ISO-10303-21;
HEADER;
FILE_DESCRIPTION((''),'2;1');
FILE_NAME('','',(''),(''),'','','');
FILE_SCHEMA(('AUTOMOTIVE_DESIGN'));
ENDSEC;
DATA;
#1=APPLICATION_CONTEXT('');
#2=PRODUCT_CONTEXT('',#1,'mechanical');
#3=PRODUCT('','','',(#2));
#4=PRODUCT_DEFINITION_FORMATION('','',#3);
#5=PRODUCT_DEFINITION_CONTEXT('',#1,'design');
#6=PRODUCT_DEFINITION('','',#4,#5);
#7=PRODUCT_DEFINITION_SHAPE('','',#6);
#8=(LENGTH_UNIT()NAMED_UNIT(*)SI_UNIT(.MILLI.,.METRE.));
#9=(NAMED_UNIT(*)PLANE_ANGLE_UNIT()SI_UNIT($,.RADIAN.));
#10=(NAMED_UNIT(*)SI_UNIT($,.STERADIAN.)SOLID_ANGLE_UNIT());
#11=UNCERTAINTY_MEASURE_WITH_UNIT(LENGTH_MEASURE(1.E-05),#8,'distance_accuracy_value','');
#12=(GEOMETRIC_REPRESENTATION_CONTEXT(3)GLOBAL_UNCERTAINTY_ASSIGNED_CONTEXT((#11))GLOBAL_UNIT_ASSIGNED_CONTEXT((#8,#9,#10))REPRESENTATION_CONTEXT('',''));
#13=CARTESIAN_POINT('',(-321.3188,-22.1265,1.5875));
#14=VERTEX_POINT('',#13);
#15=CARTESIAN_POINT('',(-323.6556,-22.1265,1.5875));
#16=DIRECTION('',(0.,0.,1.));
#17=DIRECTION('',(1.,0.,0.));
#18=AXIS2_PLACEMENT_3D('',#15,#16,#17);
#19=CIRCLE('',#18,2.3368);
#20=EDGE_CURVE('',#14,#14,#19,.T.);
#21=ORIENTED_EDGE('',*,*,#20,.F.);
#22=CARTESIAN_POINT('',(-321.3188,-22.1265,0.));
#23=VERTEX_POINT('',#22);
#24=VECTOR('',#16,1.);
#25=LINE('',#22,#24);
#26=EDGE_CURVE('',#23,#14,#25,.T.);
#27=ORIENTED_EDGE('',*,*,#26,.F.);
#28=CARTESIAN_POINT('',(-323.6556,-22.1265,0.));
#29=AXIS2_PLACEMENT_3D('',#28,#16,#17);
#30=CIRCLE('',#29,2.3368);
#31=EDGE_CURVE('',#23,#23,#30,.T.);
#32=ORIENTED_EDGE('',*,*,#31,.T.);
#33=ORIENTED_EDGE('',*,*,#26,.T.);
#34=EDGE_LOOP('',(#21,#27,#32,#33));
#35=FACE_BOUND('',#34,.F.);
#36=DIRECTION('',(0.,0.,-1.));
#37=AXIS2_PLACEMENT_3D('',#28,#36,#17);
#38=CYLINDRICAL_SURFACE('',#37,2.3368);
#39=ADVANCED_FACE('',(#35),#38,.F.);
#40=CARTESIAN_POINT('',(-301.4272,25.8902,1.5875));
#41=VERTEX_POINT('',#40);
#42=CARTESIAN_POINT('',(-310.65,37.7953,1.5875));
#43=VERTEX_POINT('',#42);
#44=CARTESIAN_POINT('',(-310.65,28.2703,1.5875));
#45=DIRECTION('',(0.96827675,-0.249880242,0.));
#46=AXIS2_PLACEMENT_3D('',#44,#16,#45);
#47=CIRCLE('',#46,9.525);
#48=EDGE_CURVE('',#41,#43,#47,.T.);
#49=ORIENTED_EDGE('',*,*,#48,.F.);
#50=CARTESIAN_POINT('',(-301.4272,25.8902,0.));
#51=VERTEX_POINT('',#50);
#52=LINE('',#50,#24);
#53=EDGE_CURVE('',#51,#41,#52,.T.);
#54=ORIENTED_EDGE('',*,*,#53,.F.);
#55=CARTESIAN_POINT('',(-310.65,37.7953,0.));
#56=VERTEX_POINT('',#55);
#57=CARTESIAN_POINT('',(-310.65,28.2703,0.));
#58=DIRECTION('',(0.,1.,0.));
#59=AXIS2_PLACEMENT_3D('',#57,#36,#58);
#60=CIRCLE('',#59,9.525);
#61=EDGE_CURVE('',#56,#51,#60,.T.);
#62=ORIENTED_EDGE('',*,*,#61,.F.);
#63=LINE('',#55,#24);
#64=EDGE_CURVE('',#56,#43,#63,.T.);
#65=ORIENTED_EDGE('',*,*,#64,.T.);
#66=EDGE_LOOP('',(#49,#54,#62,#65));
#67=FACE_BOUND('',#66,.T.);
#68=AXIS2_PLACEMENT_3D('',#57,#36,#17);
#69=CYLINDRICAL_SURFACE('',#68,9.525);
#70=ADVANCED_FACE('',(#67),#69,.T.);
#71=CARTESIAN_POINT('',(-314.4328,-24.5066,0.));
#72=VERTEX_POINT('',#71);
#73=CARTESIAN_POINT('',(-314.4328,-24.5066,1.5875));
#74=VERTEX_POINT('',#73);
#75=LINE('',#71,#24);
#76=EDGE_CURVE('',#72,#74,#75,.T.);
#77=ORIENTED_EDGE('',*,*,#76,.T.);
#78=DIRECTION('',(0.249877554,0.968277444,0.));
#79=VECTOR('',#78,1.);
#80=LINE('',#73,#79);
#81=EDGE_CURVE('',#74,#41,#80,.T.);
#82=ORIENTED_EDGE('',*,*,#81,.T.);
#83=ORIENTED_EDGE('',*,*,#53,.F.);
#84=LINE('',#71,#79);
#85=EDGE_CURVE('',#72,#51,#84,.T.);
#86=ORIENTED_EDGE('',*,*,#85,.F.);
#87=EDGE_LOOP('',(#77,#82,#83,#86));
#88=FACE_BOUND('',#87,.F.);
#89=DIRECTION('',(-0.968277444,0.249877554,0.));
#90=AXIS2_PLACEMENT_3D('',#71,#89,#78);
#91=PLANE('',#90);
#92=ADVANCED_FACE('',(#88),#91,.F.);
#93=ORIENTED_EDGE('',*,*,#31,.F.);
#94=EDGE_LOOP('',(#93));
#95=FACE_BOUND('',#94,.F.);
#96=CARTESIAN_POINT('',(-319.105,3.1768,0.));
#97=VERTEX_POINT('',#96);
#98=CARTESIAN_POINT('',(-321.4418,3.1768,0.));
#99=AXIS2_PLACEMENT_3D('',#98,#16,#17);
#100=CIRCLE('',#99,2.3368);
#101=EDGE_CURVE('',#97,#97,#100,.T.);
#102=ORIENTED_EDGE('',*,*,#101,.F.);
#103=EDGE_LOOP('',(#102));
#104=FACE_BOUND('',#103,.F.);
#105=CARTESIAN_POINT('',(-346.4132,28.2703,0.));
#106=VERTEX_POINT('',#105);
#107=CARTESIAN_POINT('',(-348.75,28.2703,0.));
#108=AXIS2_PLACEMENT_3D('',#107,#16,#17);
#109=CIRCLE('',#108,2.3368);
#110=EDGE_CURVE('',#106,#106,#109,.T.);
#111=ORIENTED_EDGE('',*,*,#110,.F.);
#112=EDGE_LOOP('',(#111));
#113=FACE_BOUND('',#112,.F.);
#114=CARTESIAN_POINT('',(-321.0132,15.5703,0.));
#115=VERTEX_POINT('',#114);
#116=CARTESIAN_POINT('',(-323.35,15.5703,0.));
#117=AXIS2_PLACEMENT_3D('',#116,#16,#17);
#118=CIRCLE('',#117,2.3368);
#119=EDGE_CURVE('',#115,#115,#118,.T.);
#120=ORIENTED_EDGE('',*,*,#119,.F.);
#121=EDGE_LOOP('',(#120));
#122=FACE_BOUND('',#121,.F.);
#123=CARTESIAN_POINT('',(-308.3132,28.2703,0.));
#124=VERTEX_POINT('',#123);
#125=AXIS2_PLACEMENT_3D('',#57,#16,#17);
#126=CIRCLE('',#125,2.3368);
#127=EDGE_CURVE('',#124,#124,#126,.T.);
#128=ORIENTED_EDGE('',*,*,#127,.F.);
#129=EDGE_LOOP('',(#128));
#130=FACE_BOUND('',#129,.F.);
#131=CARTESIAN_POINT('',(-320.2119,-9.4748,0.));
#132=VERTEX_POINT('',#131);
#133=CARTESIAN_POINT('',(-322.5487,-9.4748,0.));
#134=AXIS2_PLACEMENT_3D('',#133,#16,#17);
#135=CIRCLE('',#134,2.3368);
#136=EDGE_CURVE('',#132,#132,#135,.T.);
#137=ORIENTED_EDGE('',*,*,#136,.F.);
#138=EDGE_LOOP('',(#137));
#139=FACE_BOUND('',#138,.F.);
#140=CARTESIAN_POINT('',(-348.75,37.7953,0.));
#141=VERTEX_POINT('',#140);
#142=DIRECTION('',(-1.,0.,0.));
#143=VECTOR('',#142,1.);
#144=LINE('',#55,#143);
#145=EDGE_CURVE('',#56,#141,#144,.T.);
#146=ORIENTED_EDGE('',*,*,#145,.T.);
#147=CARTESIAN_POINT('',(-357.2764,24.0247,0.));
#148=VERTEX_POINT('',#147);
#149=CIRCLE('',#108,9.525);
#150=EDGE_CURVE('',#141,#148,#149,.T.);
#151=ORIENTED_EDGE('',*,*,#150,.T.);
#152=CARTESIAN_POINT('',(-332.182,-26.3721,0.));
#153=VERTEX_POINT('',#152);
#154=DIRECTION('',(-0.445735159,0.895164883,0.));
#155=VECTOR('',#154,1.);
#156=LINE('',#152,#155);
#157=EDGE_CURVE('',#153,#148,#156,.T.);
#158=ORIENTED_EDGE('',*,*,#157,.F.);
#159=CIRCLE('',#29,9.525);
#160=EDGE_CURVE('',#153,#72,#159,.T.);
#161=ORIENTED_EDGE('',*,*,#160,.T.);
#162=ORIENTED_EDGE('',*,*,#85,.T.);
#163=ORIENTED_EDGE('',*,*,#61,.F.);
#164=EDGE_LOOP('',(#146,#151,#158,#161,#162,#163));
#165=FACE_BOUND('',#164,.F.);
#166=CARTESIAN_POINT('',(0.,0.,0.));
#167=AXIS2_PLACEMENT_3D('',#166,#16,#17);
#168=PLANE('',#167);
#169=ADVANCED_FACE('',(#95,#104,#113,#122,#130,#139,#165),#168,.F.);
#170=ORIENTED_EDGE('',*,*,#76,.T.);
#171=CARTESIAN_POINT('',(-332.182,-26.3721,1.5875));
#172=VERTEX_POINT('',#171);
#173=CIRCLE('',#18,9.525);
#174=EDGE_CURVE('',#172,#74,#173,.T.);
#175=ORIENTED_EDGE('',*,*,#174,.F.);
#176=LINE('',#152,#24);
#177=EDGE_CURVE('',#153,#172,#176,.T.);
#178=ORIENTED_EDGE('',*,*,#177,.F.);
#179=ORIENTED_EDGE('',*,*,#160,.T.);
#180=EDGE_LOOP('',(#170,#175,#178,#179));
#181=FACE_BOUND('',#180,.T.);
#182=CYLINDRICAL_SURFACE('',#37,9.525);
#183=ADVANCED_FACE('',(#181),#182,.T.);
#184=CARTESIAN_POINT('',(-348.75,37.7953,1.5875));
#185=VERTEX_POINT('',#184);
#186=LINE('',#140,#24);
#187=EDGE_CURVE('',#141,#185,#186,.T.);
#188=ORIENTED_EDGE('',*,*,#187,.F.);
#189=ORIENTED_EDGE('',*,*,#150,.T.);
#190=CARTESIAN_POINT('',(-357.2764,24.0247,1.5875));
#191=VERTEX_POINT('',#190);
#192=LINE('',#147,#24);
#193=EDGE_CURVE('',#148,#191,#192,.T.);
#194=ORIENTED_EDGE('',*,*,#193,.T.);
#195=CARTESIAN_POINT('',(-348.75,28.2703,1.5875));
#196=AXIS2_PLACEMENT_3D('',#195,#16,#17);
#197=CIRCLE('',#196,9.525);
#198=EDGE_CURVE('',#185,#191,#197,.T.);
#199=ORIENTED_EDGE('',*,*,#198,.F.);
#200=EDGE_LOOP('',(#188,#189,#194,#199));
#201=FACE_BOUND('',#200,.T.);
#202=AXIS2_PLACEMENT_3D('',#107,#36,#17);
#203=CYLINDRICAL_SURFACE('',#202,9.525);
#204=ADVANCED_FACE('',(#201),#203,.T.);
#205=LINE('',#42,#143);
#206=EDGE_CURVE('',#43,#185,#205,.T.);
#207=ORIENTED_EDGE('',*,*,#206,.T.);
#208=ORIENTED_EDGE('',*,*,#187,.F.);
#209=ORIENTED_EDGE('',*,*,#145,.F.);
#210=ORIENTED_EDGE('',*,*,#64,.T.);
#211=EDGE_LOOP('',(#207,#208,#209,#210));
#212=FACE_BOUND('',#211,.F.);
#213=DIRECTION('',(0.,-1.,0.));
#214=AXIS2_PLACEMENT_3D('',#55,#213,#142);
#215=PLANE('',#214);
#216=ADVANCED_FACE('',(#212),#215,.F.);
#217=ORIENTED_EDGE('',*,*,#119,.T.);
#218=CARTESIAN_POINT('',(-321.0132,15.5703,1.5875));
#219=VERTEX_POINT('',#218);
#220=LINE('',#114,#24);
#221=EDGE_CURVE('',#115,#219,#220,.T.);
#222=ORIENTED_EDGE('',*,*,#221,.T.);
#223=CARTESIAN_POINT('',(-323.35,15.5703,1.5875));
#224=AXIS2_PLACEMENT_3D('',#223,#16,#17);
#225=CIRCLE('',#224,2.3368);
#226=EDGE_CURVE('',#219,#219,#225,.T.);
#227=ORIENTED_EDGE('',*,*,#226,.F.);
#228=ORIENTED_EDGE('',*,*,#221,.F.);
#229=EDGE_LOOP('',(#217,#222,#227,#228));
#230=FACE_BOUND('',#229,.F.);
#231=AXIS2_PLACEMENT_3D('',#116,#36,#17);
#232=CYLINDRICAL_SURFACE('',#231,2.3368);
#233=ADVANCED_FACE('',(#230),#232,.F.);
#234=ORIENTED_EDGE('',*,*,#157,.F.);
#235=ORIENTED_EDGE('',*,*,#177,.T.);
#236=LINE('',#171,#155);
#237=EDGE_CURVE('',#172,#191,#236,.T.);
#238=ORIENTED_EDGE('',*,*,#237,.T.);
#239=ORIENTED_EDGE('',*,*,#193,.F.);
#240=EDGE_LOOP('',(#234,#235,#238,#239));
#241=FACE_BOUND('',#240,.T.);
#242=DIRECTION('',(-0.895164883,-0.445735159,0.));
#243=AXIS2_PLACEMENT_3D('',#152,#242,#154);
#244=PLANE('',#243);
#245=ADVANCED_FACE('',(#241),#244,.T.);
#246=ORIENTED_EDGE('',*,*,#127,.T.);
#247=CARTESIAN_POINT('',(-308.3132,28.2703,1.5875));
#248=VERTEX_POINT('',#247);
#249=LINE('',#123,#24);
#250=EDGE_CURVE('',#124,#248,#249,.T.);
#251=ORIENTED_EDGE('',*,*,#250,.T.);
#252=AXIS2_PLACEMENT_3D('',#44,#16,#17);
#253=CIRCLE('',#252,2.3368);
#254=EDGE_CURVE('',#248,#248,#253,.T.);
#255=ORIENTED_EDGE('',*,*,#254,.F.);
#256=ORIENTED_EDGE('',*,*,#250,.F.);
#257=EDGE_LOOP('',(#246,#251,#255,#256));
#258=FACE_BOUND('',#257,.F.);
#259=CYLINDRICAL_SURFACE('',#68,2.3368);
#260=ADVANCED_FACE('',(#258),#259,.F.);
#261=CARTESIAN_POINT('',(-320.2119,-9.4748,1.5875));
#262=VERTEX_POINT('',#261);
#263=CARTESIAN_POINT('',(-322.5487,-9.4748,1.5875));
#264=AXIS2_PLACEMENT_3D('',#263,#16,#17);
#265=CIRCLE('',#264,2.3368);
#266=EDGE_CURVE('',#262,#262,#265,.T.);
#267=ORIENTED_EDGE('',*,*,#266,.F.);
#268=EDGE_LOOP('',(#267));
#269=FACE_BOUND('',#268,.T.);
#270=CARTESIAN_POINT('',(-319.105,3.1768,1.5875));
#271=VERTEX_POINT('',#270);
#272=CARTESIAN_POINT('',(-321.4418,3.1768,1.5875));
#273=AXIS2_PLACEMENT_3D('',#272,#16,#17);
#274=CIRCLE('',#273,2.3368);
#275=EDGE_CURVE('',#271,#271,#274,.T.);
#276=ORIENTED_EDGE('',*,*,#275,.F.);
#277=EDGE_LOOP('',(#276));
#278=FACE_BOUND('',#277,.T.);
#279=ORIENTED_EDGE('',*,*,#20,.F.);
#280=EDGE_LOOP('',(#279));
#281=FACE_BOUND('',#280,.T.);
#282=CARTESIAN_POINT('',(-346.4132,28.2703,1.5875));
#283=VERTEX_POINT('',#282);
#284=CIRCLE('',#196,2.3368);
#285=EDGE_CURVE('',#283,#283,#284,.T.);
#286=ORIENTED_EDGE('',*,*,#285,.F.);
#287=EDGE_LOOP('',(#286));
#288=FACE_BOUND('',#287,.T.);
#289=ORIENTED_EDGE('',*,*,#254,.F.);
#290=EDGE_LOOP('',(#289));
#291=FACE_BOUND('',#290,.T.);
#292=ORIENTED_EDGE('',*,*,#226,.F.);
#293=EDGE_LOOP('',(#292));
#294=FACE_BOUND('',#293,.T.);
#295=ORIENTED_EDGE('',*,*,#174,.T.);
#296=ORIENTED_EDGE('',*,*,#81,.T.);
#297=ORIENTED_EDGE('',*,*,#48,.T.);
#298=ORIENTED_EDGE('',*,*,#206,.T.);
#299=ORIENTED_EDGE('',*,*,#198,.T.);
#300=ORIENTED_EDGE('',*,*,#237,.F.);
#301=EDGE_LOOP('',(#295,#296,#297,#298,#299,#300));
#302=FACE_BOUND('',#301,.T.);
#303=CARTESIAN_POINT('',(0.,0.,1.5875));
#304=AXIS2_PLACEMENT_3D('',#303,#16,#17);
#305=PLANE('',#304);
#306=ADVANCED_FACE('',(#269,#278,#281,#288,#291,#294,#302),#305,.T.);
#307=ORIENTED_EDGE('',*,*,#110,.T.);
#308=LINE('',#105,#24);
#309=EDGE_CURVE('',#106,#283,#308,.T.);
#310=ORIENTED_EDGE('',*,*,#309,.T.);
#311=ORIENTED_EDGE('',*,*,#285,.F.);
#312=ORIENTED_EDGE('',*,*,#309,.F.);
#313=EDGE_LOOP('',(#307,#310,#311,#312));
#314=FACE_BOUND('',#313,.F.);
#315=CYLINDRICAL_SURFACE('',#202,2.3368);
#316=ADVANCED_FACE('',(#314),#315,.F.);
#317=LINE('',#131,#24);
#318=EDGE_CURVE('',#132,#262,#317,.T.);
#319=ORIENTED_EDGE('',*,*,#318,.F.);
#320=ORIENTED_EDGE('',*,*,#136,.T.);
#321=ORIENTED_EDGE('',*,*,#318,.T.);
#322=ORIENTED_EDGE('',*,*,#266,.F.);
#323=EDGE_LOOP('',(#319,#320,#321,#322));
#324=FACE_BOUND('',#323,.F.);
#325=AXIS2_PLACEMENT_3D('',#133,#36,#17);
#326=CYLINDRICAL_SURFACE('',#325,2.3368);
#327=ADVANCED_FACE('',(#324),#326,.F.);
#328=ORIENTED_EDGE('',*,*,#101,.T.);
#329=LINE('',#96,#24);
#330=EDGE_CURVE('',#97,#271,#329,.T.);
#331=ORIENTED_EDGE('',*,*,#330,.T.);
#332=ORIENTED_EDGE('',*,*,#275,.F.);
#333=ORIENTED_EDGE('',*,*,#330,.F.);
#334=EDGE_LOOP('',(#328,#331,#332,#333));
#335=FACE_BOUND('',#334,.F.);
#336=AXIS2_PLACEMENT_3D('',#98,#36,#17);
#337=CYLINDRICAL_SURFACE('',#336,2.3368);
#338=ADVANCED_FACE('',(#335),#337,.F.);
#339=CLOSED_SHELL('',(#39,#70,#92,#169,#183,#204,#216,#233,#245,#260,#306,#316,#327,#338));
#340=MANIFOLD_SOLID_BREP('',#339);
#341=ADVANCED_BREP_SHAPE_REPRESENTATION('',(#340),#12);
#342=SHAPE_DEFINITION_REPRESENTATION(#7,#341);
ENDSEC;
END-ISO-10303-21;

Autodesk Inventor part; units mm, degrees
ref_plane "YZ Plane" through (0, 0, 0) normal (1, 0, 0) x (0, 1, 0)
ref_plane "XZ Plane" through (0, 0, 0) normal (0, 1, 0) x (-1, 0, 0)
ref_plane "XY Plane" through (0, 0, 0) normal (0, 0, 1) x (1, 0, 0)
sketch "Sketch1" plane through (0, 0, 0) normal (0, 0, 1) x (1, 0, 0)
  circle A0 centre (-322.5487, -9.4748) radius 2.3368
  circle A1 centre (-321.4418, 3.1768) radius 2.3368
  circle A2 centre (-323.6556, -22.1265) radius 2.3368
  line L0 (-321.4418, 3.1768) -> (-321.0479, 7.6801) construction
  circle A3 centre (-367.8, 21.9203) radius 2.3114 construction
  line L1 (-378.0119, 9.2203) -> (-319.4881, 9.2203) construction
  circle A4 centre (-323.6556, -22.1265) radius 9.525
  circle A5 centre (-321.4418, 3.1768) radius 9.525
  circle A6 centre (-310.65, 28.2703) radius 2.3114 construction
  circle A7 centre (-323.35, 15.5703) radius 2.3114 construction
  circle A8 centre (-348.75, 28.2703) radius 9.525
  circle A9 centre (-310.65, 28.2703) radius 9.525
  line L2 (-332.182, -26.3721) -> (-357.2764, 24.0247)
  line L3 (-312.0866, 0.8208) -> (-311.9531, 2.3467)
  line L4 (-312.6917, -0.5863) -> (-312.0866, 0.8208)
  line L5 (-310.65, 37.7953) -> (-348.75, 37.7953)
  line L6 (-346.4386, 30.0737) -> (-346.4386, 26.4669) construction
  circle A10 centre (-348.75, 28.2703) radius 2.3114 construction
  circle A11 centre (-348.75, 28.2703) radius 2.3368
  circle A12 centre (-310.65, 28.2703) radius 2.3368
  circle A13 centre (-323.35, 15.5703) radius 2.3368
  circle A14 centre (-321.4418, 3.1768) radius 1.5848 construction
  circle A15 centre (-321.4418, 3.1768) radius 1.5848 construction
  line L7 (-314.4328, -24.5066) -> (-301.4272, 25.8902)
  point P0 (0, 0)
  point P1 (-319.4881, 34.6203)
  point P2 (-314.4552, -24.5918)
  point P3 (-301.8999, 24.5072)
  point P4 (-312.4196, 0.0464)
  dimension "d0" = 4.6736
  dimension "d1" = 4.6736
  dimension "d2" = 4.6736
  dimension "d5" = 0
  dimension "d6" = 0
  dimension "d8" = 85
  dimension "d9" = 19.05
  dimension "d10" = 19.05
  dimension "d11" = 19.05
  dimension "d12" = 19.05
  dimension "d13" = 0
  dimension "d14" = 0
  dimension "d15" = 4.6736
  dimension "d16" = 4.6736
  dimension "d17" = 4.6736
  dimension "d20" = 0
  dimension "d22" = 12.7
  dimension "d23" = 12.7
  dimension "d24" = 0
extrude "Extrusion2" add sketch "Sketch1" along normal blind 1.5875 contours A4 | A4 L2 A8 L5 A9 L7 | A8 | A9 | A5
sketch "Sketch2" plane through (0, 0, 1.5875) normal (0, 0, 1) x (1, 0, 0)
  arc A0 (-312.6917, -0.5863) -> (-311.9531, 2.3467) centre (-321.4418, 3.1768) ccw
  line L0 (-312.0866, 0.8208) -> (-312.6917, -0.5863)
  line L1 (-311.9531, 2.3467) -> (-312.0866, 0.8208)
  arc A1 (-301.4272, 25.8902) -> (-310.65, 37.7953) centre (-310.65, 28.2703) ccw
  line L2 (-310.65, 37.7953) -> (-348.75, 37.7953)
  arc A2 (-348.75, 37.7953) -> (-357.2764, 24.0247) centre (-348.75, 28.2703) ccw
  line L3 (-357.2764, 24.0247) -> (-332.182, -26.3721)
  arc A3 (-332.182, -26.3721) -> (-314.4328, -24.5066) centre (-323.6556, -22.1265) ccw
  line L4 (-314.4328, -24.5066) -> (-301.4272, 25.8902)
  circle A4 centre (-321.4418, 3.1768) radius 2.3368
  circle A5 centre (-323.6556, -22.1265) radius 2.3368
  circle A6 centre (-348.75, 28.2703) radius 2.3368
  circle A7 centre (-310.65, 28.2703) radius 2.3368
  circle A8 centre (-323.35, 15.5703) radius 2.3368
  circle A9 centre (-322.5487, -9.4748) radius 2.3368
  line L5 (-312.0866, 0.8208) -> (-312.6917, -0.5863)
  arc A10 (-312.6917, -0.5863) -> (-311.9531, 2.3467) centre (-321.4418, 3.1768) ccw
  line L6 (-311.9531, 2.3467) -> (-312.0866, 0.8208)
  point P0 (0, 0)
sheet face with bend "Face1" sketch "Sketch2" thickness 1.5875 toward (0, 0, -1) bend radius 1.5875 contours A0 L1 L0
bend "Bend1"
equation "\"d27\" = Thickness"
equation "\"d28\" = BendRadius"
equation "\"d29\" = BendReliefWidth"
equation "\"d31\" = MinimumRemnant"
equation "\"d30\" = BendReliefDepth"
equation "\"d32\" = TransitionRadius"
equation "\"BendRadius\" = Thickness"
equation "\"BendReliefWidth\" = Thickness"
equation "\"BendReliefDepth\" = 0.5 * Thickness"
equation "\"CornerReliefSize\" = 4 * Thickness"
equation "\"MinimumRemnant\" = 2 * Thickness"
equation "\"TransitionRadius\" = BendRadius"
equation "\"JacobiRadiusSize\" = BendRadius"
equation "\"GapSize\" = Thickness"
equation "\"Thickness\" = 1.5875"
properties part number "motormount"
